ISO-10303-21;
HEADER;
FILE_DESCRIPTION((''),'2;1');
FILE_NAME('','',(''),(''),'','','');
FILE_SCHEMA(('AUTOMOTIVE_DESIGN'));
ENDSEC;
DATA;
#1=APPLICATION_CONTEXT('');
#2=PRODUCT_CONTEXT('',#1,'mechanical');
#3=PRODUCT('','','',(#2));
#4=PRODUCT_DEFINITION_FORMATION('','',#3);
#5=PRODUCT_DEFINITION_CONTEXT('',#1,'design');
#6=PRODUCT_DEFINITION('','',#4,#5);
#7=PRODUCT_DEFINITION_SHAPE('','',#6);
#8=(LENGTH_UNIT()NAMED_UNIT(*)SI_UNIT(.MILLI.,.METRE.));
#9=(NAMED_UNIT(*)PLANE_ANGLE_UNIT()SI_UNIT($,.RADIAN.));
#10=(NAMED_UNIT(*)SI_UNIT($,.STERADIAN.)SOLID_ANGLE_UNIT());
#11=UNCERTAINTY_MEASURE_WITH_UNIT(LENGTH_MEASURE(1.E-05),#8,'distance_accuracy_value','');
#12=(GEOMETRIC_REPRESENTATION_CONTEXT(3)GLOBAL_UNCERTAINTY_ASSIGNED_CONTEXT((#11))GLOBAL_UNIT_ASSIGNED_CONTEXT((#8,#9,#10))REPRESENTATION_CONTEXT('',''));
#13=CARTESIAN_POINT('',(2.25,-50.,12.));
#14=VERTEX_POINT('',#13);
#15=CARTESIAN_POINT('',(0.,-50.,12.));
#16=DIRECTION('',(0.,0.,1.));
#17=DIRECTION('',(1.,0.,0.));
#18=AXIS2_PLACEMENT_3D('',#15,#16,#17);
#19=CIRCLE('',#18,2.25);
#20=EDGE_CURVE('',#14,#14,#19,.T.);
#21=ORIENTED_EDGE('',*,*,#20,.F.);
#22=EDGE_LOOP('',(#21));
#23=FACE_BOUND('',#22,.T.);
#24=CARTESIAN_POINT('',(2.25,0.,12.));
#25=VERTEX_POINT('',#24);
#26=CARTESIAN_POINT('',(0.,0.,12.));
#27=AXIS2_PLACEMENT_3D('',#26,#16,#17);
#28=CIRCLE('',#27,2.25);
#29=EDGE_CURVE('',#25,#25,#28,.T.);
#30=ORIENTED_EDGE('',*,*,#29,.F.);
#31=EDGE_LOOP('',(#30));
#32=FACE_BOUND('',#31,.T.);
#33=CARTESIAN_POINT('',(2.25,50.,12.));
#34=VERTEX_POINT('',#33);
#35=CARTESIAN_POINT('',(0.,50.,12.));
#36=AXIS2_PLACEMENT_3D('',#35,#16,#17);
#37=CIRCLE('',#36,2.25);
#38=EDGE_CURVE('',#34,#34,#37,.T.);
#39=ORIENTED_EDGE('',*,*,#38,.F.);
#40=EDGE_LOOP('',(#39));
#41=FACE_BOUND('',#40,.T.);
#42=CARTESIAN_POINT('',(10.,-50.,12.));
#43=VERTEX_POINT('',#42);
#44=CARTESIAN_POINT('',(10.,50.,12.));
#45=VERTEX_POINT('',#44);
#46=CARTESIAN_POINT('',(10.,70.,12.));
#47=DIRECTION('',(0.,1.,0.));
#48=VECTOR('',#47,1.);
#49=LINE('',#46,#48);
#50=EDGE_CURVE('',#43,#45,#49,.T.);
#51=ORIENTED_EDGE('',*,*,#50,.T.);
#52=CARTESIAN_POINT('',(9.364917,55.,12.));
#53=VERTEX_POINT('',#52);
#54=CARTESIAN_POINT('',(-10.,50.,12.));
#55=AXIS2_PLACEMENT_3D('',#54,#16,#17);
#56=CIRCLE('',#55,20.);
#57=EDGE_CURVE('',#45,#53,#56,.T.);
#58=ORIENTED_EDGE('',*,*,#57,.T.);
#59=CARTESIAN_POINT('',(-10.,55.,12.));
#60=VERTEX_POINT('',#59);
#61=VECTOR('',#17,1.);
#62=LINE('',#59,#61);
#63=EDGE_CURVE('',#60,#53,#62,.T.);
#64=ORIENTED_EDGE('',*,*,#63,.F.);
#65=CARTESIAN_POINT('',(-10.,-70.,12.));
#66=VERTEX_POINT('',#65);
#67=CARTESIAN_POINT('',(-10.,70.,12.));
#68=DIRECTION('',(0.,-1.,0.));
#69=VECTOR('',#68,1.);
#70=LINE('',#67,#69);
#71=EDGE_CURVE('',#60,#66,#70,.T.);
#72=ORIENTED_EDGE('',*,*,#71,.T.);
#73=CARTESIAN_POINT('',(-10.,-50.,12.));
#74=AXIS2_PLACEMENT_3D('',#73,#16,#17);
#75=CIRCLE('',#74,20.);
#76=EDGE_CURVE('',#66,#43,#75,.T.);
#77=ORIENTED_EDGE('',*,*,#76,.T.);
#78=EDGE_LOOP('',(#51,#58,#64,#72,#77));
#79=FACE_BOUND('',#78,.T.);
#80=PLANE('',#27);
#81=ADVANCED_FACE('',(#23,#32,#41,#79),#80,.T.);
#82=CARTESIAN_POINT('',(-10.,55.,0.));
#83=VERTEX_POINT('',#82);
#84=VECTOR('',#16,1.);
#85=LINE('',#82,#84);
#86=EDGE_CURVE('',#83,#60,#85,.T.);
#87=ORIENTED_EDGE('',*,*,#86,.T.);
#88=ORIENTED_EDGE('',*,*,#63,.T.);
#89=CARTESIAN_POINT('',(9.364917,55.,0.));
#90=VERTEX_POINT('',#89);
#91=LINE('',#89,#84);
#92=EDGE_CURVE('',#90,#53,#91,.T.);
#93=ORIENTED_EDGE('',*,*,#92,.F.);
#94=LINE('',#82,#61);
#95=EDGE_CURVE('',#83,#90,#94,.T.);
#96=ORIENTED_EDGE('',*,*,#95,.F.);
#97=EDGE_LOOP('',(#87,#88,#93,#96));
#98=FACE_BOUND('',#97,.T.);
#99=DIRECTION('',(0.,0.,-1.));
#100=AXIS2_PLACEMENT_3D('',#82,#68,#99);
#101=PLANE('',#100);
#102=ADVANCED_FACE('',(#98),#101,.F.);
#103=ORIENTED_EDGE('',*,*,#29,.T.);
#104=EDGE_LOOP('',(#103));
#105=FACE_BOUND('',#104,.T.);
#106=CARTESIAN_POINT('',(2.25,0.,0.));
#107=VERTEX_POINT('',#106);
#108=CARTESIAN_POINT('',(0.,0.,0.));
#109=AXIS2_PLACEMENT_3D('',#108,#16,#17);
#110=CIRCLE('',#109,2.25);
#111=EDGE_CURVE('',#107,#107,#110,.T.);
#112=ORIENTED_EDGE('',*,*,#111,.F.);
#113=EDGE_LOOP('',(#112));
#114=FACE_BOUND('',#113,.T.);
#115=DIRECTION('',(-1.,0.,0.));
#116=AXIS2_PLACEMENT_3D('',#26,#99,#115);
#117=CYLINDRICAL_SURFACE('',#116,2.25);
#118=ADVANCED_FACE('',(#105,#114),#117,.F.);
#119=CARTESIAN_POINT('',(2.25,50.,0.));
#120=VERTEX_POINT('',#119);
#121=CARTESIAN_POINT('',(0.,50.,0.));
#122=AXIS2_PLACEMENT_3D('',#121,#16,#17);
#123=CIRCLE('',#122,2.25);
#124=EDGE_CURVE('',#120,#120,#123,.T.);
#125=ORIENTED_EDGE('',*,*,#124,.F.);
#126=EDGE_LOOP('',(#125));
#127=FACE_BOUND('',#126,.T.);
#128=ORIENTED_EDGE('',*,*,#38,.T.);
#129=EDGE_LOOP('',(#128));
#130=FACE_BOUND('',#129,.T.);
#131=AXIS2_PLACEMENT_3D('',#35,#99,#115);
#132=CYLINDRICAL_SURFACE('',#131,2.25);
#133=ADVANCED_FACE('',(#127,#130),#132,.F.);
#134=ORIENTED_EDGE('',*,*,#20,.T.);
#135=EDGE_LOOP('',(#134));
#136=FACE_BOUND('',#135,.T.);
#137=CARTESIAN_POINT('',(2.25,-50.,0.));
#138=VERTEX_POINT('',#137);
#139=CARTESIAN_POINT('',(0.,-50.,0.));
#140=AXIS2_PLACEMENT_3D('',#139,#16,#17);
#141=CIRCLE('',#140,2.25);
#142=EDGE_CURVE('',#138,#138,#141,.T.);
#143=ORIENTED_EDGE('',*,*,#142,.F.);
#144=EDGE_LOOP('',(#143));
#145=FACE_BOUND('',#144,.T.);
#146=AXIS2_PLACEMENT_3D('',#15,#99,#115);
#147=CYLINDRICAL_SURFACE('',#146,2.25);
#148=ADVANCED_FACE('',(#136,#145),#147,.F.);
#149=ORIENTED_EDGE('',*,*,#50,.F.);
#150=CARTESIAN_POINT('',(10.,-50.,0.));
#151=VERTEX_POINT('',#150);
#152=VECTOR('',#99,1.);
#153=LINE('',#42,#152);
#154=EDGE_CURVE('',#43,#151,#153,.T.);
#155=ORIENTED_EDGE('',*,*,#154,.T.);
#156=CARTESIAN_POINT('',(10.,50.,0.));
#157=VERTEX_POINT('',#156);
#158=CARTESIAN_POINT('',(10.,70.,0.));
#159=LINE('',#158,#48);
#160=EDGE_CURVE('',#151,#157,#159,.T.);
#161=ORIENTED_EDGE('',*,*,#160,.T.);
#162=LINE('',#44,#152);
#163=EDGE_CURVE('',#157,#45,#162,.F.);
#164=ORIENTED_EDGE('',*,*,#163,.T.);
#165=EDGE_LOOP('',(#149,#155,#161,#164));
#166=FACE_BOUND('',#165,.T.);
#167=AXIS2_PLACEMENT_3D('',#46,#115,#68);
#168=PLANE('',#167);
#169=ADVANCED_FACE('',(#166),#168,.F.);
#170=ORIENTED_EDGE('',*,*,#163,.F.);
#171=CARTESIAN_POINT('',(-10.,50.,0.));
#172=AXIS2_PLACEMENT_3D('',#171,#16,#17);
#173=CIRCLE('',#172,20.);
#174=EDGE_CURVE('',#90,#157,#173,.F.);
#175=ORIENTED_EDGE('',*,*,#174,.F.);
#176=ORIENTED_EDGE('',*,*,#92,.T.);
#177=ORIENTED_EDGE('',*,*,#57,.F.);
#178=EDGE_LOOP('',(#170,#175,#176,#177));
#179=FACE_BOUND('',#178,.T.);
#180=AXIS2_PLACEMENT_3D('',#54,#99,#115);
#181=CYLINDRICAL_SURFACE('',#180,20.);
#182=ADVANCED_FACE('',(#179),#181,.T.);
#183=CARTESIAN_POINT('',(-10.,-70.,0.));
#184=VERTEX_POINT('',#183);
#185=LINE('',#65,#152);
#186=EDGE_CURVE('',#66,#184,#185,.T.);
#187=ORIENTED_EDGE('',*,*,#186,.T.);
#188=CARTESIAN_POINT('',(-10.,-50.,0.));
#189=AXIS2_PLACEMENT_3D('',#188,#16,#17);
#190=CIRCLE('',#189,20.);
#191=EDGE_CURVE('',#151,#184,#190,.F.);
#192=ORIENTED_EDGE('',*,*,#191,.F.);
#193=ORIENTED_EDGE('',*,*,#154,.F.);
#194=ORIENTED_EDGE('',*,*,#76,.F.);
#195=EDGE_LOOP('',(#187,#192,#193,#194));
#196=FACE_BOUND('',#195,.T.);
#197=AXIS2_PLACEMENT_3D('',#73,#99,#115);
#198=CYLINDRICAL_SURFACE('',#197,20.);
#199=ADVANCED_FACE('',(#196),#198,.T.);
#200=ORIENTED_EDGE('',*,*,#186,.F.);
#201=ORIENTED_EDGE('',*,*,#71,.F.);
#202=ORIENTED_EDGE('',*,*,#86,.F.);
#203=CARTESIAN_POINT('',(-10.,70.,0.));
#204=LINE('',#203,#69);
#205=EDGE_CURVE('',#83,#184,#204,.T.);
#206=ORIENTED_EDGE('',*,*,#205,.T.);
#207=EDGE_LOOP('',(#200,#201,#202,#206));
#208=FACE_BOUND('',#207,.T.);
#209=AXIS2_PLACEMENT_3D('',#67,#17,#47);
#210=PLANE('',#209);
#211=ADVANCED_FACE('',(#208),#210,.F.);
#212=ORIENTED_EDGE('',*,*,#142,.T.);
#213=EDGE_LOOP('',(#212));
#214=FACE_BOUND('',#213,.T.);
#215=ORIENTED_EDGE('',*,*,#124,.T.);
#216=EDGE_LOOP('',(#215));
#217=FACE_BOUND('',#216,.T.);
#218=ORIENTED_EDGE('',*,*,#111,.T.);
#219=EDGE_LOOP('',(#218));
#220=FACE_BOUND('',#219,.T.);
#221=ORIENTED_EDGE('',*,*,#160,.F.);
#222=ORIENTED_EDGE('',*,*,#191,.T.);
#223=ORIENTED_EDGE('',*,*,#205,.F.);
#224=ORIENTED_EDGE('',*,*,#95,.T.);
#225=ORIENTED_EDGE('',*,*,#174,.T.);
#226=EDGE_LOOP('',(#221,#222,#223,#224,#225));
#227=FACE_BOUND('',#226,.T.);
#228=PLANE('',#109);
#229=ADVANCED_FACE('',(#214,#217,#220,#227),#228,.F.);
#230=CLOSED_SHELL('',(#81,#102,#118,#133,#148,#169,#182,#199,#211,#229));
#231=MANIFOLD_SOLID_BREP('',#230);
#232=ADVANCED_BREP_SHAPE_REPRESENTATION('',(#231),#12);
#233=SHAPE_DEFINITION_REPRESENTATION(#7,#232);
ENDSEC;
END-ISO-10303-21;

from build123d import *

# Parameters (mm, degrees)
SKETCH_1_W          = 20
SKETCH_1_H          = 140
SKETCH_1_R          = 2.25
EXTRUDE_1_DEPTH     = 12
FILLET_1_R          = 20
SKETCH_2_W          = 19.364916731
SKETCH_2_H          = 15
CUT_EXTRUDE_1_DEPTH = 72.721684308


with BuildPart() as part:
    # 草图1 → 凸台-拉伸1 (new body)
    with BuildSketch(Plane.XY):
        Rectangle(SKETCH_1_W, SKETCH_1_H)
        with Locations((0, -50)):
            Circle(SKETCH_1_R, mode=Mode.SUBTRACT)
        Circle(SKETCH_1_R, mode=Mode.SUBTRACT)
        with Locations((0, 50)):
            Circle(SKETCH_1_R, mode=Mode.SUBTRACT)
    extrude(amount=EXTRUDE_1_DEPTH)

    # 圆角1
    fillet_1_edges = [part.edges().sort_by_distance(p)[0] for p in [
        (10, -70, 6),
        (10, 70, 6),
    ]]
    fillet(fillet_1_edges, radius=FILLET_1_R - 0.0001)  # a hair under: the kernel refuses the full size

    # 草图2 → 切除-拉伸1 (cut, through all)
    with BuildSketch(Plane.XY.offset(12)):
        with Locations((-0.317541634, 62.5)):
            Rectangle(SKETCH_2_W, SKETCH_2_H)
    extrude(amount=-CUT_EXTRUDE_1_DEPTH, mode=Mode.SUBTRACT)


solid = part.part
